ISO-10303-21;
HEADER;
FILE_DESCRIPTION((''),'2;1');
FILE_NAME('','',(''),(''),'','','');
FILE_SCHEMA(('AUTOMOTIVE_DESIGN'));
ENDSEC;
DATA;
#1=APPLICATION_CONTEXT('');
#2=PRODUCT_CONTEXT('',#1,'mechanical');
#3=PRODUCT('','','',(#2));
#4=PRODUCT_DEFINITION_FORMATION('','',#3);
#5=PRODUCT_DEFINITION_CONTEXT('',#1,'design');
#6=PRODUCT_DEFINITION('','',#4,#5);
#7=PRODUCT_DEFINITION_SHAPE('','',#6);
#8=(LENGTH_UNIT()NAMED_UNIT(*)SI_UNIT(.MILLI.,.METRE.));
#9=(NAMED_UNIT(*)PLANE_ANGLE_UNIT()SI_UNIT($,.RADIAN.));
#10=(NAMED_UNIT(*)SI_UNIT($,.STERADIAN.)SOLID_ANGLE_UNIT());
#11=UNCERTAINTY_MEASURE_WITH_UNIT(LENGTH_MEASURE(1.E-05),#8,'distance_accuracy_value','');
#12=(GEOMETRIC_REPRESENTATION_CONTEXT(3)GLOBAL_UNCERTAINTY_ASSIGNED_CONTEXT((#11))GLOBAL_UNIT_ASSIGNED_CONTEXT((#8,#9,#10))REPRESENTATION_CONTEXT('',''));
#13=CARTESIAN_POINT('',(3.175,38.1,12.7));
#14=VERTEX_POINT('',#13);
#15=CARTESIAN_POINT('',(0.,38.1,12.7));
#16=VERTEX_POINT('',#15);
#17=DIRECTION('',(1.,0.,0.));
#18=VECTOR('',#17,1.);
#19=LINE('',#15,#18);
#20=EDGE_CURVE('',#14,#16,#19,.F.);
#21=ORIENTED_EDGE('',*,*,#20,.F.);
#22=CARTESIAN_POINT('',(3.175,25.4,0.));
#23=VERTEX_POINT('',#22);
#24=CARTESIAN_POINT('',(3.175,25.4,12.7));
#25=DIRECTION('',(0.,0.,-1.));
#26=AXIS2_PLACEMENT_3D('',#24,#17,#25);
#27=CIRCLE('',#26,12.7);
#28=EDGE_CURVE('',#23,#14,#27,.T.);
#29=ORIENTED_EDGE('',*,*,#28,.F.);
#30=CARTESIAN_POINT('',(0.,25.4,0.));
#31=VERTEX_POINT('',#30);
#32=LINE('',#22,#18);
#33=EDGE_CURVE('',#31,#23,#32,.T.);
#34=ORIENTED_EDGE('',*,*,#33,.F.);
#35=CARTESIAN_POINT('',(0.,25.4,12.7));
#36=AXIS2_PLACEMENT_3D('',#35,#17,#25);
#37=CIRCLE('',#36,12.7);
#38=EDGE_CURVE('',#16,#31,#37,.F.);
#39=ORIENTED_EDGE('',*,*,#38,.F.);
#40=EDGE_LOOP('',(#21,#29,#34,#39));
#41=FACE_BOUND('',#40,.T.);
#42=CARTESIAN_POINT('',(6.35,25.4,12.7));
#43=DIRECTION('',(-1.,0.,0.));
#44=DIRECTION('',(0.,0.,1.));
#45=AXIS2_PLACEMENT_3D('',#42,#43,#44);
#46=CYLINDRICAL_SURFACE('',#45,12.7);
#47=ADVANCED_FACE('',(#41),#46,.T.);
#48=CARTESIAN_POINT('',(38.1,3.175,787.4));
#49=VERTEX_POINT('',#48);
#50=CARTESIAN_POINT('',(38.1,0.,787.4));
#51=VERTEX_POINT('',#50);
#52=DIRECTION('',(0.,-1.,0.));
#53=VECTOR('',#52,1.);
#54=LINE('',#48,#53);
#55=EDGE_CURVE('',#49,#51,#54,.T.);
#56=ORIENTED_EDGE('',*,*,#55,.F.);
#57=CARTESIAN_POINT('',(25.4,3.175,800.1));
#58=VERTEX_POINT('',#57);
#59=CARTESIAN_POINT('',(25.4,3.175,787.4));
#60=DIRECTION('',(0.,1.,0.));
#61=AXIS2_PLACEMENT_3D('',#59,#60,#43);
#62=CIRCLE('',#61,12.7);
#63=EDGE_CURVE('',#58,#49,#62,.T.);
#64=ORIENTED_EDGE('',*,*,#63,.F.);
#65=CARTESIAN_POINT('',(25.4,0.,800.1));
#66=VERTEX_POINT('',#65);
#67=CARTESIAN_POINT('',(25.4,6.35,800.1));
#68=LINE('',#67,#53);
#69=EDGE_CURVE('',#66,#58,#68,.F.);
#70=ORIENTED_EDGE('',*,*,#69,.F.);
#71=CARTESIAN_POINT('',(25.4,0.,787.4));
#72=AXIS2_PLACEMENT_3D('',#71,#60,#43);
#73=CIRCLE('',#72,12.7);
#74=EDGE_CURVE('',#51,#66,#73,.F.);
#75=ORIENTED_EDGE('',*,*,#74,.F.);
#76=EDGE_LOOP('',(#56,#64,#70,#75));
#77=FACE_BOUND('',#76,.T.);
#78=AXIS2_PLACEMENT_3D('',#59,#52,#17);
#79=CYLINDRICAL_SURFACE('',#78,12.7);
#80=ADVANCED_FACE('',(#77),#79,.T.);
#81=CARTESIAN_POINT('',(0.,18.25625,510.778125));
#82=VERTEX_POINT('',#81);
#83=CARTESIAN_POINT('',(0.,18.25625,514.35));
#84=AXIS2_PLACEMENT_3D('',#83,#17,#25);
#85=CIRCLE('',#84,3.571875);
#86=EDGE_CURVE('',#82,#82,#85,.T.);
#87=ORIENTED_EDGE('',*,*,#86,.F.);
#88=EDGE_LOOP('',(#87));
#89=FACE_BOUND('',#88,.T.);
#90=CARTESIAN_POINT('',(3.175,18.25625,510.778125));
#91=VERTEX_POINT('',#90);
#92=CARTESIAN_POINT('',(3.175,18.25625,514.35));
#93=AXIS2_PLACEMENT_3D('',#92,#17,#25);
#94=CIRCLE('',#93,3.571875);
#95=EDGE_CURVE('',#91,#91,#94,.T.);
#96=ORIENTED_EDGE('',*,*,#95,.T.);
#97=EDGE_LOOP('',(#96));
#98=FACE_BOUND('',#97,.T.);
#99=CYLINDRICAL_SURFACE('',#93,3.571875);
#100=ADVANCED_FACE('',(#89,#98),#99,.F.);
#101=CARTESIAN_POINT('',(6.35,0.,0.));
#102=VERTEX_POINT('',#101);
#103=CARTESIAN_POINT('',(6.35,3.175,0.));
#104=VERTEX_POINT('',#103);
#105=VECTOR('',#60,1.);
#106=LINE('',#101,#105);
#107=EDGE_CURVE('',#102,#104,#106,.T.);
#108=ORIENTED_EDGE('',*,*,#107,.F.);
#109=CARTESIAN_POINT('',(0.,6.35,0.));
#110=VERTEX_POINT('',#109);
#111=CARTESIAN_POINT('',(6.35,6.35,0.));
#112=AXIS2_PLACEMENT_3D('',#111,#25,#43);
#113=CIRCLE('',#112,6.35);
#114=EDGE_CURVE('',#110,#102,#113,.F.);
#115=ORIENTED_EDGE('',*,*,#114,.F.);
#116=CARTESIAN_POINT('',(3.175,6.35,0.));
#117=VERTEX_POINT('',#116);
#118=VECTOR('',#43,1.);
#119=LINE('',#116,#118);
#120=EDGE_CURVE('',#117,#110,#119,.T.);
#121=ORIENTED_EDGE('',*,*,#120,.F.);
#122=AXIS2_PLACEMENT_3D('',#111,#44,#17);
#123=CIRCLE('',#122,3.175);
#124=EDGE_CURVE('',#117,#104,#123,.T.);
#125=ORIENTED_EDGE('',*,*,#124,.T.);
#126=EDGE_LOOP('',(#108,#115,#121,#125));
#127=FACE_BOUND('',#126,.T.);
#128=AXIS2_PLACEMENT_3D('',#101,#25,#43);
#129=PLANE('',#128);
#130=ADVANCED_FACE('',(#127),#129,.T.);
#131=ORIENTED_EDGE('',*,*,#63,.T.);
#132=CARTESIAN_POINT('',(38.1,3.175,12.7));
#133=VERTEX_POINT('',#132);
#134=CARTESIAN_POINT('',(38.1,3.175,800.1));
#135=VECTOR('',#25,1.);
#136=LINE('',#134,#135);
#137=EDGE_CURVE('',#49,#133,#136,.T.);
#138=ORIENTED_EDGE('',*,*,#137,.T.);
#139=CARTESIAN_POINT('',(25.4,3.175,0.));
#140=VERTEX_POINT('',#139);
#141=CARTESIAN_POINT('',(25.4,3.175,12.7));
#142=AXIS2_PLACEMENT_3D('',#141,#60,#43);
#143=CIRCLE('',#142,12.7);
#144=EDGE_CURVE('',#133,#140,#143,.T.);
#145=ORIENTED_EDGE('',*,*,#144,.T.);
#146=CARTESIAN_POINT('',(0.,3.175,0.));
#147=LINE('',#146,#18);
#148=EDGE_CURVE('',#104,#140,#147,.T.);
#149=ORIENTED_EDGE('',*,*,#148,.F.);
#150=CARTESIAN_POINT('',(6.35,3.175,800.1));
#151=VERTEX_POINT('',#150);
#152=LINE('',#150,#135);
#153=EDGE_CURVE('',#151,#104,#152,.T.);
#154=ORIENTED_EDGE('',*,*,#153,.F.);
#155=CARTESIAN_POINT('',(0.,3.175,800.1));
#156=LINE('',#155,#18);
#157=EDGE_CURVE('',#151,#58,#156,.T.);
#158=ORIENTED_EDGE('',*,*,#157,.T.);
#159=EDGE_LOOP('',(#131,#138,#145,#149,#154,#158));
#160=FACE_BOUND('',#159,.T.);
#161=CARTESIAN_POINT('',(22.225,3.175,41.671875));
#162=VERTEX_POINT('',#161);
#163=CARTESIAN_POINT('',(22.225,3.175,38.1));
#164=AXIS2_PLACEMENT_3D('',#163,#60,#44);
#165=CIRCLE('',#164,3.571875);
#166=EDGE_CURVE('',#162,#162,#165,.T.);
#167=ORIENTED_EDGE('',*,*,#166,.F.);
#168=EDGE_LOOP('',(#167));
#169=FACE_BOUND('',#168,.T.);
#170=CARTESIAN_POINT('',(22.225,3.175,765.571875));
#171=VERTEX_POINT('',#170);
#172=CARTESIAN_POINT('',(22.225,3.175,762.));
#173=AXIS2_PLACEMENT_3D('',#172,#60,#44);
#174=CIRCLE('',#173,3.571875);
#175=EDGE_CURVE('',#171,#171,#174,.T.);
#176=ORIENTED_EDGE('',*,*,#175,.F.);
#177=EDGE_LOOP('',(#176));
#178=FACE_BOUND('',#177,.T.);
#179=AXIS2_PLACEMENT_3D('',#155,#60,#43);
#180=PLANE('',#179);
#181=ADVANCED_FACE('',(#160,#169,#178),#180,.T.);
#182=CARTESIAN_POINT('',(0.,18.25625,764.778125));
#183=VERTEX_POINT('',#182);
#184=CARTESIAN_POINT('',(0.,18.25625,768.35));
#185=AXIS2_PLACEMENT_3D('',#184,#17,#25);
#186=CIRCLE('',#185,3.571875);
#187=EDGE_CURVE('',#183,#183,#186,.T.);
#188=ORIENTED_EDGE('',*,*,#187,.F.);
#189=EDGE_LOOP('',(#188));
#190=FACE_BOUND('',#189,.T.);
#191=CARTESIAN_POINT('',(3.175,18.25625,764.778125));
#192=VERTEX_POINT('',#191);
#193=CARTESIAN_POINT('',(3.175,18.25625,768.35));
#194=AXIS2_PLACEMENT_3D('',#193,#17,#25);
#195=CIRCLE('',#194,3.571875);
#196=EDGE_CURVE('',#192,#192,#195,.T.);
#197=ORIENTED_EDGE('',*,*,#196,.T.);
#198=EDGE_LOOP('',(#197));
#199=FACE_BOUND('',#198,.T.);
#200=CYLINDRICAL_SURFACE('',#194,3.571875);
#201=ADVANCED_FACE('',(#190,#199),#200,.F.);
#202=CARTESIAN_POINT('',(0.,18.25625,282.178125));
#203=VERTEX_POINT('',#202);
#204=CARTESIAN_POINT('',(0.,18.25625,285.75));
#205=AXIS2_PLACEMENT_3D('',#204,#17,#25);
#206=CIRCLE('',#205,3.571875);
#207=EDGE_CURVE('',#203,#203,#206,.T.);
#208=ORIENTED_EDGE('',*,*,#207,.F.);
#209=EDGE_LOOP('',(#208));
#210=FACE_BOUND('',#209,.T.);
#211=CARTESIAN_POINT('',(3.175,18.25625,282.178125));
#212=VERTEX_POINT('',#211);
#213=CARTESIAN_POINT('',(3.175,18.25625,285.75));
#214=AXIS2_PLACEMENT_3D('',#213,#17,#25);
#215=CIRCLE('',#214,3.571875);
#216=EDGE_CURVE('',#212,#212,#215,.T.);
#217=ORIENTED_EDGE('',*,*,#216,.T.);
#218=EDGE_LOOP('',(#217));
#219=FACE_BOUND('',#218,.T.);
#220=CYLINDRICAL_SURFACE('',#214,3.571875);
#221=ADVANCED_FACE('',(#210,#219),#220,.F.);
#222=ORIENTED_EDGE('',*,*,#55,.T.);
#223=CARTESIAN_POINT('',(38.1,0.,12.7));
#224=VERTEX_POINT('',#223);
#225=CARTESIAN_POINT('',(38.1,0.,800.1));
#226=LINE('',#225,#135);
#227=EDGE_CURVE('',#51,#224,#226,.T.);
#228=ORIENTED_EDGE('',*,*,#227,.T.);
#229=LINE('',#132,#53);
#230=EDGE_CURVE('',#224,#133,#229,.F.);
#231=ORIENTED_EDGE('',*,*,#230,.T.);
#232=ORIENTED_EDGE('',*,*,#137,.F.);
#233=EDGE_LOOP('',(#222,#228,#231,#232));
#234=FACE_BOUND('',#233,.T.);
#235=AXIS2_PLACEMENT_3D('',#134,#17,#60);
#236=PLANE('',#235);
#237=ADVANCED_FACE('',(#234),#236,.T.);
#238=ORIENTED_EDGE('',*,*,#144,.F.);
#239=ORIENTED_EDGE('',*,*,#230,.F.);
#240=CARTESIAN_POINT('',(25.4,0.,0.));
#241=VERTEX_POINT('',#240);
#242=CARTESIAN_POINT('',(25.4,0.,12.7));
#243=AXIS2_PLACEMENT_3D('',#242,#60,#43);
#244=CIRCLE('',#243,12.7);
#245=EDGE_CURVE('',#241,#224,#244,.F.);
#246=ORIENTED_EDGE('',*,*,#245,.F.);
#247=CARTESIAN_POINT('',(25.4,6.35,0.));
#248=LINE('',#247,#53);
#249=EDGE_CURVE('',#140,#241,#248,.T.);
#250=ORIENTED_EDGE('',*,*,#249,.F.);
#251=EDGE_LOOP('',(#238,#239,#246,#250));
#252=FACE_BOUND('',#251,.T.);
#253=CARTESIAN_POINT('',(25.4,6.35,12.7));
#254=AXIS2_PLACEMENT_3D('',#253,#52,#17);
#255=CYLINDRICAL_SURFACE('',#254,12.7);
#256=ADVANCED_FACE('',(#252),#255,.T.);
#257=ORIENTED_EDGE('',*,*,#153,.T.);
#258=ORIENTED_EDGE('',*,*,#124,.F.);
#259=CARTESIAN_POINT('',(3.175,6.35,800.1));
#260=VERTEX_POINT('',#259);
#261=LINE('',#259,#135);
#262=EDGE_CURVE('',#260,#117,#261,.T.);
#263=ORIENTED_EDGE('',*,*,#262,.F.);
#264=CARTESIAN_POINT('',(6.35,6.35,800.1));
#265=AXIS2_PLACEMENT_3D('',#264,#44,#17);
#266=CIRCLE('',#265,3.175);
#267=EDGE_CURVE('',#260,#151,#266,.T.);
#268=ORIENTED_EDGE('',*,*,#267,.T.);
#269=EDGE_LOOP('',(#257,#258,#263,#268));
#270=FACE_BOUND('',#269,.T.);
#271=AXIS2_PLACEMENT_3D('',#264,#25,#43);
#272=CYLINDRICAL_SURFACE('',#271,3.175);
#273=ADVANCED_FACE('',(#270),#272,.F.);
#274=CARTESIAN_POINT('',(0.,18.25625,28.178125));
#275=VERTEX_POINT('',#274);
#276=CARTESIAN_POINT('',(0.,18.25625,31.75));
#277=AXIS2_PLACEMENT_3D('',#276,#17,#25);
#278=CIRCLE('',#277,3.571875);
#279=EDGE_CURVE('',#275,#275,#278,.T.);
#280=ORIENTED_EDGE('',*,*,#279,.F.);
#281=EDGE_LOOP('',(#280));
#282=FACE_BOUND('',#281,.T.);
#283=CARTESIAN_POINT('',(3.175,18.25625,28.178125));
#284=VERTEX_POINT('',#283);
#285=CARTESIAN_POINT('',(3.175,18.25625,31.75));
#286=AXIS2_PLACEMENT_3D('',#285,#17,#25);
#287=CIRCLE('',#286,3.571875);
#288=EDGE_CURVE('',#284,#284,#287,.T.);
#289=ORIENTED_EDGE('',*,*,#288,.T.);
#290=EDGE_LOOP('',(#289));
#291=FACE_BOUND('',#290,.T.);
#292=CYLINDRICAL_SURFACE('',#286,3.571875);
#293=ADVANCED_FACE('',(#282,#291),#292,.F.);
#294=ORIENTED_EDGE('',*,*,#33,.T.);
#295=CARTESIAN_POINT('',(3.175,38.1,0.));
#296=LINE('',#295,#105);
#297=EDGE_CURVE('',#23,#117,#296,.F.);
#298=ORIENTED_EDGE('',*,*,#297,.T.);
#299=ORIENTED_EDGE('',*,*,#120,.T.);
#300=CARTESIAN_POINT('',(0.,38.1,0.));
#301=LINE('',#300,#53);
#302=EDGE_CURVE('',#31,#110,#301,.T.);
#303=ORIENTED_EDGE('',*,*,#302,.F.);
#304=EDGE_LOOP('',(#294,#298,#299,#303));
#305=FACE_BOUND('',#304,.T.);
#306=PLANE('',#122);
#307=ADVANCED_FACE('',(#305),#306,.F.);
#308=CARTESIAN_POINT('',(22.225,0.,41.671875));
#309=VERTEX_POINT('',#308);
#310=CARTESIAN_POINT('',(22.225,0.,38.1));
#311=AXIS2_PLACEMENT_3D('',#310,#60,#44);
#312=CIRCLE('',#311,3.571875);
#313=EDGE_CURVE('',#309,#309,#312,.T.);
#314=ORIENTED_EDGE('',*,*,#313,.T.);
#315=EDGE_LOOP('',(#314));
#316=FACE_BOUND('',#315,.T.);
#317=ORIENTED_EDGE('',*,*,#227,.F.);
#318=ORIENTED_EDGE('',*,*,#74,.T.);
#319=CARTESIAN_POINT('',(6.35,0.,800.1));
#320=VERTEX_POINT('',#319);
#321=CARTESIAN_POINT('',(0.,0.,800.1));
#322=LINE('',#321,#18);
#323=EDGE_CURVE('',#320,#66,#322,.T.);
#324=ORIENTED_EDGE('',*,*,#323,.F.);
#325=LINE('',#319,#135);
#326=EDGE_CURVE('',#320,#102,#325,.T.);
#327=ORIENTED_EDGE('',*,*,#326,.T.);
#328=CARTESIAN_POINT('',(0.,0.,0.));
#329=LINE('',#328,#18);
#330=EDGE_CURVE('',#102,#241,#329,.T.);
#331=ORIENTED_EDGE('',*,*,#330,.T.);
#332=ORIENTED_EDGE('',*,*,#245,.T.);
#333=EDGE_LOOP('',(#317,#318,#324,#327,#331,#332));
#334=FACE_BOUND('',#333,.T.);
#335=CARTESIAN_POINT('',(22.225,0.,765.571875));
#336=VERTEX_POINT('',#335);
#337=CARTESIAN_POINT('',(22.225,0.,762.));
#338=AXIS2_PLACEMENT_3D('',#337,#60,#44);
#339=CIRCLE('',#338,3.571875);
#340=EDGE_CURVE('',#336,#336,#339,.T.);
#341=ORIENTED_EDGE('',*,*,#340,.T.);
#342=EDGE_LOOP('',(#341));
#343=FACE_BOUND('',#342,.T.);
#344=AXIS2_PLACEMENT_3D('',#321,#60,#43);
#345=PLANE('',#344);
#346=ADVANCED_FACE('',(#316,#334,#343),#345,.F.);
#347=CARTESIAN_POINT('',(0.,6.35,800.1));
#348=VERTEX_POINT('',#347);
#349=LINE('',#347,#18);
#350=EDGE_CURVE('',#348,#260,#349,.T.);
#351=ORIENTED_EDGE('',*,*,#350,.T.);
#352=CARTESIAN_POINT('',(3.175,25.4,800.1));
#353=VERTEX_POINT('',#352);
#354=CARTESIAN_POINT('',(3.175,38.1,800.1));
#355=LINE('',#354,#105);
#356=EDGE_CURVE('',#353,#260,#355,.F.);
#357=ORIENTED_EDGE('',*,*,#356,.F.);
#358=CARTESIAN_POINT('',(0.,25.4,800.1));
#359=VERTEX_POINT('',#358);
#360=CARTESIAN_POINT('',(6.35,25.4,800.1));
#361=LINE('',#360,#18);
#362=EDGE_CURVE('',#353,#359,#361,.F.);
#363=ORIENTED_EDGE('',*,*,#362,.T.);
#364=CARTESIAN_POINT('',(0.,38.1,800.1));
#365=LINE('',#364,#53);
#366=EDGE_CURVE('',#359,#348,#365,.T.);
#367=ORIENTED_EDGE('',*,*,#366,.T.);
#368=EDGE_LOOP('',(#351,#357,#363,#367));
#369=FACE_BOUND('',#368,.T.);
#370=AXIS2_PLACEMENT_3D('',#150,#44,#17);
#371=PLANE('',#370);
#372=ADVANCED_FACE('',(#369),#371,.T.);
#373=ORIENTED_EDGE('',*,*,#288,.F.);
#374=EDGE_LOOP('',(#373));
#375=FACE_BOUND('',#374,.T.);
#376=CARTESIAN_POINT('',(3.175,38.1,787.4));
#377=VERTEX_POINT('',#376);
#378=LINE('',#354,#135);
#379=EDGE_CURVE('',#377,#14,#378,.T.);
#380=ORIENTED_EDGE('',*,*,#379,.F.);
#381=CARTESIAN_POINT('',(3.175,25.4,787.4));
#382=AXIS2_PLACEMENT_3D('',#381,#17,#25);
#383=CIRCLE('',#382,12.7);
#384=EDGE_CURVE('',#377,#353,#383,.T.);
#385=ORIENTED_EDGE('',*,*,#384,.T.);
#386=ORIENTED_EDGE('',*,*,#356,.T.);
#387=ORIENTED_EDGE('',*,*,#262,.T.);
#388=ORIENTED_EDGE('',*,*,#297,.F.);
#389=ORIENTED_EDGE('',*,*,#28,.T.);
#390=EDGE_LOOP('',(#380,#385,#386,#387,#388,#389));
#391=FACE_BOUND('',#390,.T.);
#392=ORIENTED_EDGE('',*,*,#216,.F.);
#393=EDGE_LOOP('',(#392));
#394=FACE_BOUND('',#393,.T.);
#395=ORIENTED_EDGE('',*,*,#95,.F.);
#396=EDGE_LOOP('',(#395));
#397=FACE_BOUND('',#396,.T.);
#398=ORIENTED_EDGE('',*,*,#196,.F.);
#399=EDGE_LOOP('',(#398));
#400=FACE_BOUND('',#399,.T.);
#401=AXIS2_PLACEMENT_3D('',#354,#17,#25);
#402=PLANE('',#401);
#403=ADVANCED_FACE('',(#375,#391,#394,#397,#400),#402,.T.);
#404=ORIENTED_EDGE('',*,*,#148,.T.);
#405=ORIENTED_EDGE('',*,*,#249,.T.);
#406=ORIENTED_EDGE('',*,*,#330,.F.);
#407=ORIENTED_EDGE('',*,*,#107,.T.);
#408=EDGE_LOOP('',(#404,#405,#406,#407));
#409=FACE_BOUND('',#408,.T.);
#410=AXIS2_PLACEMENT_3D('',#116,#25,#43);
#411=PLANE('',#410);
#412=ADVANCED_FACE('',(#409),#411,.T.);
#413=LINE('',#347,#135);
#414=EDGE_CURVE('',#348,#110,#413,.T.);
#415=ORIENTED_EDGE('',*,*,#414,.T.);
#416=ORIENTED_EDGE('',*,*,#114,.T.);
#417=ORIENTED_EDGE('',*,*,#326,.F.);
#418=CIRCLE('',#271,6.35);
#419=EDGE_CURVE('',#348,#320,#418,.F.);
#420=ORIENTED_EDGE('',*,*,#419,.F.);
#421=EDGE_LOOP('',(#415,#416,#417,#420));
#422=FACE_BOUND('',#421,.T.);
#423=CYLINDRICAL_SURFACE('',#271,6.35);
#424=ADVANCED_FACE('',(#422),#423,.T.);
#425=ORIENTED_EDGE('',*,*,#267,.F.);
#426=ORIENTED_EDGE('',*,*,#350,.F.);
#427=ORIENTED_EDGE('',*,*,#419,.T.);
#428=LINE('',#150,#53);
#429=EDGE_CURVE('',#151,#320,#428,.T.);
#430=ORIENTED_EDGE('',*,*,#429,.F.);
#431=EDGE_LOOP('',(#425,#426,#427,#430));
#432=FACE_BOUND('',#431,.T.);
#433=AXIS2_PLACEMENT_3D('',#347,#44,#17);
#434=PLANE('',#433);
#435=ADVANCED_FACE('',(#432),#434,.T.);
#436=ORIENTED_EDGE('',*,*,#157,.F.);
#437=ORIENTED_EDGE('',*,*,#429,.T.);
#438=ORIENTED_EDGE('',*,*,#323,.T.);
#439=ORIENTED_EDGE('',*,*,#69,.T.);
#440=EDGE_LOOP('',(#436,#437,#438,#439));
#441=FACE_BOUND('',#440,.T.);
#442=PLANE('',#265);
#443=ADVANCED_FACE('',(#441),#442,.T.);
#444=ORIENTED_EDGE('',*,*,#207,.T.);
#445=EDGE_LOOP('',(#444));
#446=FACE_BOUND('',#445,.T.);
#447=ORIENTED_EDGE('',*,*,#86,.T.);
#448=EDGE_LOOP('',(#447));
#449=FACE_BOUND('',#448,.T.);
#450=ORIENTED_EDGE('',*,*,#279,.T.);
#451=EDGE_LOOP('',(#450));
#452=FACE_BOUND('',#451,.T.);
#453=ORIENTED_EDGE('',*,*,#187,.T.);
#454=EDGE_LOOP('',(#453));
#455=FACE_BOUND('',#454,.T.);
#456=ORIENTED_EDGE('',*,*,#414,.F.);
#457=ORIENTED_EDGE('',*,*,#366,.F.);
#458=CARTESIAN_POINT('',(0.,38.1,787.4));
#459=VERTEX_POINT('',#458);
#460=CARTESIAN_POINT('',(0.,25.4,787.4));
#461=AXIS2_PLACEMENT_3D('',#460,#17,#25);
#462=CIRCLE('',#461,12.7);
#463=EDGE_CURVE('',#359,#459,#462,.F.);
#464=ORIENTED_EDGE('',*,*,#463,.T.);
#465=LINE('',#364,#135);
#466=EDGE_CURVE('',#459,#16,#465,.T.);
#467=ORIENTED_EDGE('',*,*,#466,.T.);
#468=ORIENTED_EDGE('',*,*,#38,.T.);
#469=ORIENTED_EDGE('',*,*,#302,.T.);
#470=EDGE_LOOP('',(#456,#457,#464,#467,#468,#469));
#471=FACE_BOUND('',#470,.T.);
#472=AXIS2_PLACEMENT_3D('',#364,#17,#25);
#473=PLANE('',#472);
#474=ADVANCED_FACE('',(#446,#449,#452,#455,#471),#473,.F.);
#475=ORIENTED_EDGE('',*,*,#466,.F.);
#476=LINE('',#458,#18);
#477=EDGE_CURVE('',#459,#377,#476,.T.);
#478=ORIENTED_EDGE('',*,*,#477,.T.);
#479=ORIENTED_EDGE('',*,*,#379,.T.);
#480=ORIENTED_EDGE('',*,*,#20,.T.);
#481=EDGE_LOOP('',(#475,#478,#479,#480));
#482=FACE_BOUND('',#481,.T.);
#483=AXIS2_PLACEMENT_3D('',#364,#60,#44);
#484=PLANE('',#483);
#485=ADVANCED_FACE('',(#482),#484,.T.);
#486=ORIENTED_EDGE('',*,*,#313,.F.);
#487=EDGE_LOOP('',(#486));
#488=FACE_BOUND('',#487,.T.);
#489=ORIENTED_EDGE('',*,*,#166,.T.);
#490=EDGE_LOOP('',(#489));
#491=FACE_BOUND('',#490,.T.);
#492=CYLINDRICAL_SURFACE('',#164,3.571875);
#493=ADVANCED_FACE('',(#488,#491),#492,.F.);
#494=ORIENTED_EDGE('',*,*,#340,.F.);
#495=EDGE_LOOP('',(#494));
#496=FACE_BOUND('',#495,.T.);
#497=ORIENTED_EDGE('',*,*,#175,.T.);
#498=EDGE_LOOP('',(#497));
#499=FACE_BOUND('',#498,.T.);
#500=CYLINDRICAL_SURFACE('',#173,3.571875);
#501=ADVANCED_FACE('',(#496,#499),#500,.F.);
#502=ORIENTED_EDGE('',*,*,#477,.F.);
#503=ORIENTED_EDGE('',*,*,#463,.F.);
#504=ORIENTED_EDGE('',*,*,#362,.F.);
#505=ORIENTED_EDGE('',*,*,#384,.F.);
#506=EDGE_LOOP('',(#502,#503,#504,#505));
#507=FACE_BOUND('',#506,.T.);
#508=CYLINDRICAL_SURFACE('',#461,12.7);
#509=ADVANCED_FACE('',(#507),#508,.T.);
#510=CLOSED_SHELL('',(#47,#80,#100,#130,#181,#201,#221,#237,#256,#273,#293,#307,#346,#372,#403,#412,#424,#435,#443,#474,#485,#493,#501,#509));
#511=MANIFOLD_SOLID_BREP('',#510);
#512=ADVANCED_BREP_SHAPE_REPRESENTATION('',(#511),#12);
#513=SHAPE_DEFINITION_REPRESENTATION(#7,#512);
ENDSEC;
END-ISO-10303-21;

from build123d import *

# Parameters (mm, degrees)
BASE_FLANGE1_DEPTH              = 800.1
FILLET1_R                       = 12.7
F_9_32_0_28125_DIAMETER_HOLE1_D = 7.14375
F_9_32_0_28125_DIAMETER_HOLE2_D = 7.14375


# Sheet-metal steps are written as plain solids
with BuildPart() as part:
    # Sketch1 → Base-Flange1 (new body)
    with BuildSketch(Plane.XY):
        with BuildLine():
            Line((0, 38.1), (0, 6.35))
            ThreePointArc((0, 6.35), (1.859871939, 1.859871939), (6.35, 0))
            Line((6.35, 0), (38.1, 0))
            Line((38.1, 0), (38.1, 3.175))
            Line((38.1, 3.175), (6.35, 3.175))
            ThreePointArc((6.35, 3.175), (4.10493597, 4.10493597), (3.175, 6.35))
            Line((3.175, 6.35), (3.175, 38.1))
            Line((3.175, 38.1), (0, 38.1))
        make_face()
    extrude(amount=BASE_FLANGE1_DEPTH)

    # Fillet1
    fillet1_edges = [part.edges().sort_by_distance(p)[0] for p in [
        (1.5875, 38.1, 800.1),
        (1.5875, 38.1, 0),
        (38.1, 1.5875, 800.1),
        (38.1, 1.5875, 0),
    ]]
    fillet(fillet1_edges, radius=FILLET1_R)

    # 9/32 (0.28125) Diameter Hole1 (through all)
    with Locations(Plane(origin=(3.175, 0, 0), x_dir=(0, 0, -1), z_dir=(1, 0, 0))):
        with Locations((-768.35, 18.25625), (-514.35, 18.25625), (-285.75, 18.25625), (-31.75, 18.25625)):
            Hole(F_9_32_0_28125_DIAMETER_HOLE1_D / 2)

    # 9/32 (0.28125) Diameter Hole2 (through all)
    with Locations(Plane(origin=(0, 3.175, 0), x_dir=(1, 0, 0), z_dir=(0, 1, 0))):
        with Locations((22.225, -38.1), (22.225, -762)):
            Hole(F_9_32_0_28125_DIAMETER_HOLE2_D / 2)


solid = part.part
